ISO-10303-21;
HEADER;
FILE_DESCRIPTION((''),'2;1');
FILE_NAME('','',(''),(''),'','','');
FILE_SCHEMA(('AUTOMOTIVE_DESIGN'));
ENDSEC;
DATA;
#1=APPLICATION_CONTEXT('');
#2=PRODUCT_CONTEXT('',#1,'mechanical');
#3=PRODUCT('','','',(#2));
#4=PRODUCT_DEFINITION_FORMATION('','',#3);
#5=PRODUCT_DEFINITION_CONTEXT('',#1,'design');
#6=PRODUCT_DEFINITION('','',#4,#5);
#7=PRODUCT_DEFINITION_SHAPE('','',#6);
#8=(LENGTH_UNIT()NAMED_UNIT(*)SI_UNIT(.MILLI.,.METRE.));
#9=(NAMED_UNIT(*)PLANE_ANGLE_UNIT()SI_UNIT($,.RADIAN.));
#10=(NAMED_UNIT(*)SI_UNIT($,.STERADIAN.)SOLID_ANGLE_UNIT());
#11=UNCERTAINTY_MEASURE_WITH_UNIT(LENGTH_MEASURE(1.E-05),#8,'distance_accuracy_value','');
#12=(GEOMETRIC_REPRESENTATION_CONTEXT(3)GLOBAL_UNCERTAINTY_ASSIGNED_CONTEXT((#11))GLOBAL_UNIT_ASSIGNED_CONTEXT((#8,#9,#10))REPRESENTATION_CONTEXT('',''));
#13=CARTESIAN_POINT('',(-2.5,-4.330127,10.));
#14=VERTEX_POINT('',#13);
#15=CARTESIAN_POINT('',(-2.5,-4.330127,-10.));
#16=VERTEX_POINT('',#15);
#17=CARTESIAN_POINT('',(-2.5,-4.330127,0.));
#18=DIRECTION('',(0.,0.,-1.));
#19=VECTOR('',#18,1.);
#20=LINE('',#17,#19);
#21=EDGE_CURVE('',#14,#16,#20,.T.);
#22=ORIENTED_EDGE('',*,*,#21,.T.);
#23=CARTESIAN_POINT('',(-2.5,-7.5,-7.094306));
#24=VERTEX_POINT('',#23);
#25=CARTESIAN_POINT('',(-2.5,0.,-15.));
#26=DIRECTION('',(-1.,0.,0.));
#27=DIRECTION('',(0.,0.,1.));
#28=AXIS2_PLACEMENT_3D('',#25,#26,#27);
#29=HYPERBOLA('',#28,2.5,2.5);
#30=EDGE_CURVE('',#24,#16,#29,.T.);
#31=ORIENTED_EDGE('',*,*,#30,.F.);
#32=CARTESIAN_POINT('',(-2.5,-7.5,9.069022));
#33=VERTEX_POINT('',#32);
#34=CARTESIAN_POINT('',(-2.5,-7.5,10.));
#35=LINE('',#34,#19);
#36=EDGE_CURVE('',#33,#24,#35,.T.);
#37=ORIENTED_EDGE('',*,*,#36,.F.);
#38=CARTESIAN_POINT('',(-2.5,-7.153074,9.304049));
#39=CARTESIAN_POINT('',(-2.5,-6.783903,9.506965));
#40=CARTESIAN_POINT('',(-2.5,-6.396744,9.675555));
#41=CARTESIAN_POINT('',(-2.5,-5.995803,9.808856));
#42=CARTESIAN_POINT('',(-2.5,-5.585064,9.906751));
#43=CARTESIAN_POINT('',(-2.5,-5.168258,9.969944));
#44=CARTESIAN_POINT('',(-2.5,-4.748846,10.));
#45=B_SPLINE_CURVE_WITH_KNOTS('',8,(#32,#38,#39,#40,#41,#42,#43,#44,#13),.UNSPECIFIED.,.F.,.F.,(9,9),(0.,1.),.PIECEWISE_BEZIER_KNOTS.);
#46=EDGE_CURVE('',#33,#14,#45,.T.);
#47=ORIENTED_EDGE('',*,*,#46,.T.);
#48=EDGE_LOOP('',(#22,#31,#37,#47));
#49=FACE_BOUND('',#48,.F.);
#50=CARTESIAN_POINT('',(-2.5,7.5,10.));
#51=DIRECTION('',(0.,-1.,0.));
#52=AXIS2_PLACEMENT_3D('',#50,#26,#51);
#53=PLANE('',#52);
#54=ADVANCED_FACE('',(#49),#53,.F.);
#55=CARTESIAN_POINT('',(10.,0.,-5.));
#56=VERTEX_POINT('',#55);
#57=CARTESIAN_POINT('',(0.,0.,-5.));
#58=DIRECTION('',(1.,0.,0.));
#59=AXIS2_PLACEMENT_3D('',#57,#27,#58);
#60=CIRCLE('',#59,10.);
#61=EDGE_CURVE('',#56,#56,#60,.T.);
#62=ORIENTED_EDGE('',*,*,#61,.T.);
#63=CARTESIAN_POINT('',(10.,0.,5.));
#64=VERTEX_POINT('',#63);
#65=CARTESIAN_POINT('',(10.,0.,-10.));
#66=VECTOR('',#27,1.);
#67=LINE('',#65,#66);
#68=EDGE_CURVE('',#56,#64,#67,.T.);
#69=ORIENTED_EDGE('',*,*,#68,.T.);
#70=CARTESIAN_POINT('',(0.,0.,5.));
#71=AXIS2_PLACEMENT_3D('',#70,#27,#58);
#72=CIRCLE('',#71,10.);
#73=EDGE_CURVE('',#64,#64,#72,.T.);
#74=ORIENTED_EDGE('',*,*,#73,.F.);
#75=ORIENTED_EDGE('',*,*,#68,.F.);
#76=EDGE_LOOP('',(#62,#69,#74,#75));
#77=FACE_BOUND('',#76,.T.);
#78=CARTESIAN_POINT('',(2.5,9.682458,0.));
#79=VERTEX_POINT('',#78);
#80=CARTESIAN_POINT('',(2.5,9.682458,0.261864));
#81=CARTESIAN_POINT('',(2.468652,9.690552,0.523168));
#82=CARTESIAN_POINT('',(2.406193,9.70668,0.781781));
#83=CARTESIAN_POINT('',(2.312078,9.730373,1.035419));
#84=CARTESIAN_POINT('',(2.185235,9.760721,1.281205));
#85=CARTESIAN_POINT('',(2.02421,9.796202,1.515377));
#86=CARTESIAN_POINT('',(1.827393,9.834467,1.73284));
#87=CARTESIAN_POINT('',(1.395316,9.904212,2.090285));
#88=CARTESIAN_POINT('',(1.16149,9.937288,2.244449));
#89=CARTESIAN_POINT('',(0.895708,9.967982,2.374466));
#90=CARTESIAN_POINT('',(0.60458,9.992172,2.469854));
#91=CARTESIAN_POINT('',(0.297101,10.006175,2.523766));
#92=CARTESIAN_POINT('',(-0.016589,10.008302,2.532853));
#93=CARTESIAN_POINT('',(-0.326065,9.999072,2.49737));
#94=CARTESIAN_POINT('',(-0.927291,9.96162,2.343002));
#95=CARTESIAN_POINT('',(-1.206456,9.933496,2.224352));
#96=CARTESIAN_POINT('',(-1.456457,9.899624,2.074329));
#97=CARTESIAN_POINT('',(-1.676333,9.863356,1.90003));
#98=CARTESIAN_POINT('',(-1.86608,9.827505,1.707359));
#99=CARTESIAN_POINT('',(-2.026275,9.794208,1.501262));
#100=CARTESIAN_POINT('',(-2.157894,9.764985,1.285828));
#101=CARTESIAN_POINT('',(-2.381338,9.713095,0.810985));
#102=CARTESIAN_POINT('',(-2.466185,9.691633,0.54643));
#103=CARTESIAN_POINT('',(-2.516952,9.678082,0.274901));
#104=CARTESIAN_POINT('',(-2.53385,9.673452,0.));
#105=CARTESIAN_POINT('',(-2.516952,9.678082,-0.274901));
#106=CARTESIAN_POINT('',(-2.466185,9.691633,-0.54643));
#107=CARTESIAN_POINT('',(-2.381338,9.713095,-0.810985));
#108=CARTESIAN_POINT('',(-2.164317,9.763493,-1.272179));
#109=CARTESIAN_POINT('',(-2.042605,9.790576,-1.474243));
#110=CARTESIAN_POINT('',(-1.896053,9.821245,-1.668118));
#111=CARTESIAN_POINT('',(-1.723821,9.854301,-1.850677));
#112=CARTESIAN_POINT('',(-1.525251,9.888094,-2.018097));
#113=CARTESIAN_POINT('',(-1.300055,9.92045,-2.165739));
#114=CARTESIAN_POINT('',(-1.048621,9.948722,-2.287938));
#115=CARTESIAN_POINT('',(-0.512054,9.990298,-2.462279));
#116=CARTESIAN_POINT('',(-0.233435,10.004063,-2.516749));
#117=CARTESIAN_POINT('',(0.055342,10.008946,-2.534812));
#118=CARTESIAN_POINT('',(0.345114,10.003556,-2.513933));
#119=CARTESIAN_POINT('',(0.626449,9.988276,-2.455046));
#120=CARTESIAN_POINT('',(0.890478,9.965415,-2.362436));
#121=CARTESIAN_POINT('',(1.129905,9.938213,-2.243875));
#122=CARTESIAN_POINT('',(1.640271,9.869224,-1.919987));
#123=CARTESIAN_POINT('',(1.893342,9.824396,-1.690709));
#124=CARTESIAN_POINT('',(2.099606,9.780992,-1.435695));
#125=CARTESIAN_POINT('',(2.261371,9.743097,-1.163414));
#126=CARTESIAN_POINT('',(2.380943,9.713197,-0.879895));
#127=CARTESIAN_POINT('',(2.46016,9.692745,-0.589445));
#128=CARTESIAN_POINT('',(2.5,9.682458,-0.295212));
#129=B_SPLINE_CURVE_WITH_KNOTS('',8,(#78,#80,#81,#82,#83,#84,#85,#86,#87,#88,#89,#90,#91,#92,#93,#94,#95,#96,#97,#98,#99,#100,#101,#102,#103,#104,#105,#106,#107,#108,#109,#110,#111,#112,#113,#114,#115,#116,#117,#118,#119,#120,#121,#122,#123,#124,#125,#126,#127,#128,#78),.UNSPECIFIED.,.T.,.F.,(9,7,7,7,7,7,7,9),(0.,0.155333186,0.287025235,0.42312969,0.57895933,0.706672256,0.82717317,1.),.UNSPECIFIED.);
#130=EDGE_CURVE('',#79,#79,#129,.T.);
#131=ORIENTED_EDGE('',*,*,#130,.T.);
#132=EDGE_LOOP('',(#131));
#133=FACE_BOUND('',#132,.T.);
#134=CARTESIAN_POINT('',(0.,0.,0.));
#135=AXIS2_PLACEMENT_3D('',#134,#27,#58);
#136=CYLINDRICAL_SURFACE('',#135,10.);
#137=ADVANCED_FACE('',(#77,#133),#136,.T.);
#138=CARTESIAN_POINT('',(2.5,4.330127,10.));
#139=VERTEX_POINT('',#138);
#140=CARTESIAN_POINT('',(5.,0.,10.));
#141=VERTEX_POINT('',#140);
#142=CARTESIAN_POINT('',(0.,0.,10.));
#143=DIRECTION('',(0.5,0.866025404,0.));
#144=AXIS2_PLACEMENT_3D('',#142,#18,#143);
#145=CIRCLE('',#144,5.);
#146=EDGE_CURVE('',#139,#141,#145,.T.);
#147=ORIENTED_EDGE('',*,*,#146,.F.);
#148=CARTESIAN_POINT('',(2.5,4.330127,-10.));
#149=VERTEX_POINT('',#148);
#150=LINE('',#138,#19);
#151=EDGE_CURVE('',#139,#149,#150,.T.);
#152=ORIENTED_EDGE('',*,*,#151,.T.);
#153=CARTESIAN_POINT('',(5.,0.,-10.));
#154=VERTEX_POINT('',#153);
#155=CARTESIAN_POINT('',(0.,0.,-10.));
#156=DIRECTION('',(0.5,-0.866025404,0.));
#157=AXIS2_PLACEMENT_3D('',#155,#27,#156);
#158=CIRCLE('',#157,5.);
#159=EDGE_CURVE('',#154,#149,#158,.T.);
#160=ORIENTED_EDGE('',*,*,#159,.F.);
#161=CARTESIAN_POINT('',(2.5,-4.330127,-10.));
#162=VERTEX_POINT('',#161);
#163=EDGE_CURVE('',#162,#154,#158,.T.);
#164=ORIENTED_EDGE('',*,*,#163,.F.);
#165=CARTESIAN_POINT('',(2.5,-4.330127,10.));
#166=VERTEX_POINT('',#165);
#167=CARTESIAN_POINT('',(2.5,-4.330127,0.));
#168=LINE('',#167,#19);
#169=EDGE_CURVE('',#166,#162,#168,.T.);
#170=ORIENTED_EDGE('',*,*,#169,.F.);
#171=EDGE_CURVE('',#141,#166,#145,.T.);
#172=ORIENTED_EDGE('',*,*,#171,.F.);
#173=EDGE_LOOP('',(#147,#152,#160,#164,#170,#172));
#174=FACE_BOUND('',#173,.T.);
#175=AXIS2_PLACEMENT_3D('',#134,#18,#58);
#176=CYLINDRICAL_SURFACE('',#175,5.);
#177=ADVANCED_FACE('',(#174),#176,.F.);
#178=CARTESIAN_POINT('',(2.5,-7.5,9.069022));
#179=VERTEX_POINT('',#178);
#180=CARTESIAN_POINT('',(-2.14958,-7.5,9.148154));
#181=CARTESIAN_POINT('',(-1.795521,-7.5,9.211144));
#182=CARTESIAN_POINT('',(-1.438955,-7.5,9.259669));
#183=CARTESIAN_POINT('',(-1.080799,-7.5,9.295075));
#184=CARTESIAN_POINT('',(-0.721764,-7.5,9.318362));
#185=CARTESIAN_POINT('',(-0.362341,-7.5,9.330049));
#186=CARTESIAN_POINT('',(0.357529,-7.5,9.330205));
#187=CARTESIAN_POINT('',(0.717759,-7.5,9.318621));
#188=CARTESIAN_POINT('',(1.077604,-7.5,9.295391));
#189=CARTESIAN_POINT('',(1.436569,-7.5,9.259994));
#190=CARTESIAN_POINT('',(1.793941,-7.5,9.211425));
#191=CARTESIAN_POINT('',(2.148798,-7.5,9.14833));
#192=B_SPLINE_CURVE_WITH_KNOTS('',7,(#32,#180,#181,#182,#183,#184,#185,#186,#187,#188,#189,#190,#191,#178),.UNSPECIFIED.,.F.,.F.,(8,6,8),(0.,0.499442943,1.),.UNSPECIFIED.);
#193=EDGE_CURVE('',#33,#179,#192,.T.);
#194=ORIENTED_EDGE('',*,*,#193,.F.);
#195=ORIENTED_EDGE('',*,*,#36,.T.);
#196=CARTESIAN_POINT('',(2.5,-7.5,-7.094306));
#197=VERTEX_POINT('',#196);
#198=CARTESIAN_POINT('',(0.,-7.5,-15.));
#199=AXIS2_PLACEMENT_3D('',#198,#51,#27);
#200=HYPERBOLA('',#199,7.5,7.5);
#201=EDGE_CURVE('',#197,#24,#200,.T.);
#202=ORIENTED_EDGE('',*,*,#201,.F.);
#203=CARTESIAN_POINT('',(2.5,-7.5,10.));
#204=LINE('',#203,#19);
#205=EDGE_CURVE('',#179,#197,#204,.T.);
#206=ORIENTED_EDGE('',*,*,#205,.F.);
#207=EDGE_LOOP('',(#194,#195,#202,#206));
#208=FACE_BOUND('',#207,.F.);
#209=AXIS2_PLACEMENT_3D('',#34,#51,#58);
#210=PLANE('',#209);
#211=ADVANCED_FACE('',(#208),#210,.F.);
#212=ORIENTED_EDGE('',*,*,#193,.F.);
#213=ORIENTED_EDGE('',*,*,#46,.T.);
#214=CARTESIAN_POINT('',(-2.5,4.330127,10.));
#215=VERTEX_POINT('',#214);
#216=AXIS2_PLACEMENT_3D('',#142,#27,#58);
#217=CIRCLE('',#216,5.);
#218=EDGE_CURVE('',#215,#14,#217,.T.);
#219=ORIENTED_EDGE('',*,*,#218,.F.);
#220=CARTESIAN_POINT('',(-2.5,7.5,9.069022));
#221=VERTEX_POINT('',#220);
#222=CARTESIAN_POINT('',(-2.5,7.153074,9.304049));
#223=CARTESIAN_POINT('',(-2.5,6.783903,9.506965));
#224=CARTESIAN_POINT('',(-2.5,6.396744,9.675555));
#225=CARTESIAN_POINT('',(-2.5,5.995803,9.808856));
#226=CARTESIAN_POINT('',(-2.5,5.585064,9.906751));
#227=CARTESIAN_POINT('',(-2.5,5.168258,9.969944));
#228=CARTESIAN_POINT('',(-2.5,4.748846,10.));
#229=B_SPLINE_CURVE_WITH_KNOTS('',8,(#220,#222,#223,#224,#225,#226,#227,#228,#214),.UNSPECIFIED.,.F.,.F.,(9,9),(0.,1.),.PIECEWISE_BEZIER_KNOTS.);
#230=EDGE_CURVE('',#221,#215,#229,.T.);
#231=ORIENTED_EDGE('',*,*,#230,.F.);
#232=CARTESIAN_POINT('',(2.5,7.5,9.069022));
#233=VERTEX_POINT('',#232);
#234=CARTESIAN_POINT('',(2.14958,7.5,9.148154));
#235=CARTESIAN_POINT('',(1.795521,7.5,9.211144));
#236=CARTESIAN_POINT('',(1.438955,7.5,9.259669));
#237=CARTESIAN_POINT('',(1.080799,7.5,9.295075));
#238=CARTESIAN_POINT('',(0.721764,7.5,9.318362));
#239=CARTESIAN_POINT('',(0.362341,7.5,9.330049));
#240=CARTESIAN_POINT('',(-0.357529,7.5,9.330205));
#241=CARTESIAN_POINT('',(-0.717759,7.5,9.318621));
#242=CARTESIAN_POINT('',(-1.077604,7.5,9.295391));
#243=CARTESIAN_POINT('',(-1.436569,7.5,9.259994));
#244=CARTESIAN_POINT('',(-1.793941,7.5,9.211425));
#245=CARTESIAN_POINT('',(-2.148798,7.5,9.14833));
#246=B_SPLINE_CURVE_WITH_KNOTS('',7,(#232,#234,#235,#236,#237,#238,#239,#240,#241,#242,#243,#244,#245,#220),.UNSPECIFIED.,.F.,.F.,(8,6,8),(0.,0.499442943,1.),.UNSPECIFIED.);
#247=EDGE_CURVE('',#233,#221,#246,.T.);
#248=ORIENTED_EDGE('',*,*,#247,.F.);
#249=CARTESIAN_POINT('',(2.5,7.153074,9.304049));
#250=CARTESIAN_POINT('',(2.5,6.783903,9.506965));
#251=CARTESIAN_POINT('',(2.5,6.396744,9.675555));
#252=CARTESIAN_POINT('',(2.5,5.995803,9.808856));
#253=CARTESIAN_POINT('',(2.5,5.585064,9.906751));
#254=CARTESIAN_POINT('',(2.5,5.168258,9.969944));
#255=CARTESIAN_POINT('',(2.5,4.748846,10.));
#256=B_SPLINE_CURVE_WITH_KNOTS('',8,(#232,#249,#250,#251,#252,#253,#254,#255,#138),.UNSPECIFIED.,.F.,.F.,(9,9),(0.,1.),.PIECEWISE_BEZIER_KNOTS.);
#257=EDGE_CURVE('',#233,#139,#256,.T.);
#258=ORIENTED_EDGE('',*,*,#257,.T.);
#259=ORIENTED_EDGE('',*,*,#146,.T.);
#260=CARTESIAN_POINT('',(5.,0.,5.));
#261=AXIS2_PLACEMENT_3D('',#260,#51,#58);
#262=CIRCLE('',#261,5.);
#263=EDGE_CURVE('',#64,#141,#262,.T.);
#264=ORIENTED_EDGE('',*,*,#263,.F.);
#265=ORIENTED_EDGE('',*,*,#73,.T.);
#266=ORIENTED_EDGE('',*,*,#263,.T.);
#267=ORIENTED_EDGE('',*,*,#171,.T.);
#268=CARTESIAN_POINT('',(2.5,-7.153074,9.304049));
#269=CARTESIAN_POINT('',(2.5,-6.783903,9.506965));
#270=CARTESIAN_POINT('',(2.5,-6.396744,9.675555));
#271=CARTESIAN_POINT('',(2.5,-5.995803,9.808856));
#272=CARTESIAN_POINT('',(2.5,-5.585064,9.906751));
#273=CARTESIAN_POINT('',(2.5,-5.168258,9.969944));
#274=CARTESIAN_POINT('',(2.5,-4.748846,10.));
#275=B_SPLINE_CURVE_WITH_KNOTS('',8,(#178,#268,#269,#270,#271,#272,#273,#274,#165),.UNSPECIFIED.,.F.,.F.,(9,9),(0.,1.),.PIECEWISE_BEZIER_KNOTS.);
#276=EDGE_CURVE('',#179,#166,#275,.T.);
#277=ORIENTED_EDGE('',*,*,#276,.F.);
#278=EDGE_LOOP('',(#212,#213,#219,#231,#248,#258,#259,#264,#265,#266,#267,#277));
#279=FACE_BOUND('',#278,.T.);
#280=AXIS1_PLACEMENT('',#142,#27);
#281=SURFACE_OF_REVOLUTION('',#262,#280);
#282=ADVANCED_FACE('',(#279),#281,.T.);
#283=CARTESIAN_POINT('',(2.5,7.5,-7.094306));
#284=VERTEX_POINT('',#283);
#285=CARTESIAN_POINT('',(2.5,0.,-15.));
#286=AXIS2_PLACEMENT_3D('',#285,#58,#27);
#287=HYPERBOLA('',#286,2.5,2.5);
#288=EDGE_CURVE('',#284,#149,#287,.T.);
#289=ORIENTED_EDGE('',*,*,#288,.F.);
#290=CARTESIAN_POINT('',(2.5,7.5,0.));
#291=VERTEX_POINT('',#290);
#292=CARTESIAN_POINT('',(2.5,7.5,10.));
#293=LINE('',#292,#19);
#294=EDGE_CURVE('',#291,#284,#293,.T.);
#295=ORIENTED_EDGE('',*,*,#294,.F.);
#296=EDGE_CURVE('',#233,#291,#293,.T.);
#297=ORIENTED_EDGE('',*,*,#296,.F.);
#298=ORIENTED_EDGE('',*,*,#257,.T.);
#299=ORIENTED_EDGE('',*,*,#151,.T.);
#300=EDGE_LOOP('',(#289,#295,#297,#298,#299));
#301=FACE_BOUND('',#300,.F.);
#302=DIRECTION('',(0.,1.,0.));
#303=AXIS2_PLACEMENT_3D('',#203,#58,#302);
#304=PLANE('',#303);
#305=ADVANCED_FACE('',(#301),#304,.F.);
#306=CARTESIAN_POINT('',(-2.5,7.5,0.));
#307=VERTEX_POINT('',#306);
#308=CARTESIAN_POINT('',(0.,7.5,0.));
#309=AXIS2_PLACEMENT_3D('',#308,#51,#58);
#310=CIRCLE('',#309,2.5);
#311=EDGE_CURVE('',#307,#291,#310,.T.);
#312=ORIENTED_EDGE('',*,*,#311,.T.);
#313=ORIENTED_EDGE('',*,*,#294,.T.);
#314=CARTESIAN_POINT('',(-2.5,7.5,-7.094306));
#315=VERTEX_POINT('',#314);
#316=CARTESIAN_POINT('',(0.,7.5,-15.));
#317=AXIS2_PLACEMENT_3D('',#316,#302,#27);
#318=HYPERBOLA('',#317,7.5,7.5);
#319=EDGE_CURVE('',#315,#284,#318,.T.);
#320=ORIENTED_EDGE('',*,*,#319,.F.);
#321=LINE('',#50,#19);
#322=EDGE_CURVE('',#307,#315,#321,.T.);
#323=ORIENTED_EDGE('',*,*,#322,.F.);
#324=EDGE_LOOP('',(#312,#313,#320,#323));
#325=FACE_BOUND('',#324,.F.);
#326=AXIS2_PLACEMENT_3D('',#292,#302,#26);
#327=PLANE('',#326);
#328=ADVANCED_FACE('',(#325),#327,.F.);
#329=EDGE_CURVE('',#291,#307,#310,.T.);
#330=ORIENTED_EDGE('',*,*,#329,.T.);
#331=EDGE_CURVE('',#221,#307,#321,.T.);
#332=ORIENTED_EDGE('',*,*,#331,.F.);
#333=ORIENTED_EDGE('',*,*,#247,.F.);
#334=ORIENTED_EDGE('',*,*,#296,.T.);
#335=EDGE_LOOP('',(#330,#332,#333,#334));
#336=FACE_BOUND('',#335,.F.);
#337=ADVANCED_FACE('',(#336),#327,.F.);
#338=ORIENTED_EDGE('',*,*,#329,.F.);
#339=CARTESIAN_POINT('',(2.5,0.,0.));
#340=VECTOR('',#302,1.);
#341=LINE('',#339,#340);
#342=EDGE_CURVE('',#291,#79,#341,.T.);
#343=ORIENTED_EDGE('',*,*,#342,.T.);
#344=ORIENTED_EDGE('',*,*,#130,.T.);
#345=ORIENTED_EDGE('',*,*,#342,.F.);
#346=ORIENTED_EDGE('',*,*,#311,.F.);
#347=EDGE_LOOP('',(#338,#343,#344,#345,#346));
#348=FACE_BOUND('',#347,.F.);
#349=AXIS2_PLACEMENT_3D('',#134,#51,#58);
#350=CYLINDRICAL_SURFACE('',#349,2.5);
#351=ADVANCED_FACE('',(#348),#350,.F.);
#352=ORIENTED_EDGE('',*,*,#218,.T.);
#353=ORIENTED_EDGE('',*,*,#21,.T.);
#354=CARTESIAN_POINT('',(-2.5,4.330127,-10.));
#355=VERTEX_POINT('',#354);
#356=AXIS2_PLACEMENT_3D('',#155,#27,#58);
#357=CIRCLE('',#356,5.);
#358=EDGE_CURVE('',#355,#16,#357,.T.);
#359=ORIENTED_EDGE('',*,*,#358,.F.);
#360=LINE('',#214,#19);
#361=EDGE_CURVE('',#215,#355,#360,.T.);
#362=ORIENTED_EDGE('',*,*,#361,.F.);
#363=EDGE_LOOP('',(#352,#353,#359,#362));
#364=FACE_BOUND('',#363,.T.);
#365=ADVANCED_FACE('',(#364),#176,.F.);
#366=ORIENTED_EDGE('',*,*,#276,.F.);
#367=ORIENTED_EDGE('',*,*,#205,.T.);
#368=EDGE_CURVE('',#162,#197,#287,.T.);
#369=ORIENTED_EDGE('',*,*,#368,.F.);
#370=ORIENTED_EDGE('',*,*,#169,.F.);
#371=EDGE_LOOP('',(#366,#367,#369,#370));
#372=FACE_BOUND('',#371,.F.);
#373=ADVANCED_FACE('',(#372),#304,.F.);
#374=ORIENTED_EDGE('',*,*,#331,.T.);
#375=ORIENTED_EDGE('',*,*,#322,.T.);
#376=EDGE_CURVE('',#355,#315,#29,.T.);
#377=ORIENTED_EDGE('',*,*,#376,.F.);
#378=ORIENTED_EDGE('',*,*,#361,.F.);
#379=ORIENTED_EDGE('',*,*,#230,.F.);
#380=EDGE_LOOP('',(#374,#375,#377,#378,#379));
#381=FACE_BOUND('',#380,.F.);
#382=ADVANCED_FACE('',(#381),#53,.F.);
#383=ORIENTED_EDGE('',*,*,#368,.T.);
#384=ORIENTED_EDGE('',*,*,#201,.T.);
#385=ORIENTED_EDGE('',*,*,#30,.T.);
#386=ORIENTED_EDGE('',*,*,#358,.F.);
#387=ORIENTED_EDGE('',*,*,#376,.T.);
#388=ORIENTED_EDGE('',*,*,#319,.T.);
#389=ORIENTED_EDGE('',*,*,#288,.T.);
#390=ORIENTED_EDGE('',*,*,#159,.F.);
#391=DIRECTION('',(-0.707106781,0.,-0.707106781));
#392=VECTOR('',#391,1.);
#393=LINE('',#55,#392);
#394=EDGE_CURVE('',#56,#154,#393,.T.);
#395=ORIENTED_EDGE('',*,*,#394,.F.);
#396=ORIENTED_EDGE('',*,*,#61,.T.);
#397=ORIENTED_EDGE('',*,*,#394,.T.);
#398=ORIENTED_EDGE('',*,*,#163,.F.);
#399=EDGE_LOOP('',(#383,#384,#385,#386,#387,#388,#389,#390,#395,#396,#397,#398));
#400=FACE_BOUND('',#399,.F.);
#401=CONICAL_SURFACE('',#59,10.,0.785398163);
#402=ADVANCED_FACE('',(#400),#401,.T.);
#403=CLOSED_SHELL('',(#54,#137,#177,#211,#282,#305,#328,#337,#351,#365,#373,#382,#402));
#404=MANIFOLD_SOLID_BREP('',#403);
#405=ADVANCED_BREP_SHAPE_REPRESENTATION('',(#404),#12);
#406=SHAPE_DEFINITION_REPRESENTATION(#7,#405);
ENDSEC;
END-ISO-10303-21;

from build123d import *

# Parameters (mm, degrees)
F0_R     = 10
F0_R_2   = 5
F1_DEPTH = 10
F3_DEPTH = 25
F7_D     = 5
F7_DEPTH = 10.0010001


# Not quite as in the source:
# - a fillet or chamfer that OpenCascade refuses, or shapes differently, is made with other operations: its cross-section is extruded or revolved along the edge and cut away or added


with BuildPart() as f1:
    # F0 (on Top) → F1 (new body, symmetric)
    with BuildSketch(Plane.XY):
        Circle(F0_R)
        Circle(F0_R_2, mode=Mode.SUBTRACT)
    extrude(amount=F1_DEPTH, both=True)

    # F2 (on face) → F3 (cut)
    with BuildSketch(Plane.XY.offset(10)):
        with BuildLine():
            Line((2.5, -4.3301270189), (2.5, 4.3301270189))
            ThreePointArc((2.5, 4.3301270189), (0, 5), (-2.5, 4.3301270189))
            Line((-2.5, 4.3301270189), (-2.5, -4.3301270189))
            ThreePointArc((-2.5, -4.3301270189), (0, -5), (2.5, -4.3301270189))
        make_face()
        with BuildLine():
            Line((2.5, 4.3301270189), (2.5, 7.5))
            Line((2.5, 7.5), (-2.5, 7.5))
            Line((-2.5, 7.5), (-2.5, 4.3301270189))
            ThreePointArc((-2.5, 4.3301270189), (0, 5), (2.5, 4.3301270189))
        make_face()
        with BuildLine():
            Line((2.5, -7.5), (2.5, -4.3301270189))
            ThreePointArc((2.5, -4.3301270189), (0, -5), (-2.5, -4.3301270189))
            Line((-2.5, -4.3301270189), (-2.5, -7.5))
            Line((-2.5, -7.5), (2.5, -7.5))
        make_face()
    extrude(amount=-F3_DEPTH, mode=Mode.SUBTRACT)

    # F4: fillet of radius 5 on 1 edges, made by hand

    # F4_s1 → F4_t2 (revolve, cut)
    with BuildSketch(Plane.XZ):
        with BuildLine():
            ThreePointArc((10, 5), (8.5355339059, 8.5355339059), (5, 10))
            Line((5, 10), (10, 10))
            Line((10, 10), (10, 5))
        make_face()
    revolve(axis=Axis((0, 0, 10), (0, 0, 1)), mode=Mode.SUBTRACT)

    # F5: chamfer of 5 on 1 edges, made by hand

    # F5_s1 → F5_t2 (revolve, cut)
    with BuildSketch(Plane.XZ):
        Polygon((10, -5), (5, -10), (10, -10), align=None)
    revolve(axis=Axis((0, 0, -10), (0, 0, 1)), mode=Mode.SUBTRACT)

    # F7 (through all, one way)
    with BuildSketch(Plane.XZ):
        with Locations((0, 0)):
            Circle(F7_D / 2)
    extrude(amount=-F7_DEPTH, mode=Mode.SUBTRACT)


solid = f1.part
